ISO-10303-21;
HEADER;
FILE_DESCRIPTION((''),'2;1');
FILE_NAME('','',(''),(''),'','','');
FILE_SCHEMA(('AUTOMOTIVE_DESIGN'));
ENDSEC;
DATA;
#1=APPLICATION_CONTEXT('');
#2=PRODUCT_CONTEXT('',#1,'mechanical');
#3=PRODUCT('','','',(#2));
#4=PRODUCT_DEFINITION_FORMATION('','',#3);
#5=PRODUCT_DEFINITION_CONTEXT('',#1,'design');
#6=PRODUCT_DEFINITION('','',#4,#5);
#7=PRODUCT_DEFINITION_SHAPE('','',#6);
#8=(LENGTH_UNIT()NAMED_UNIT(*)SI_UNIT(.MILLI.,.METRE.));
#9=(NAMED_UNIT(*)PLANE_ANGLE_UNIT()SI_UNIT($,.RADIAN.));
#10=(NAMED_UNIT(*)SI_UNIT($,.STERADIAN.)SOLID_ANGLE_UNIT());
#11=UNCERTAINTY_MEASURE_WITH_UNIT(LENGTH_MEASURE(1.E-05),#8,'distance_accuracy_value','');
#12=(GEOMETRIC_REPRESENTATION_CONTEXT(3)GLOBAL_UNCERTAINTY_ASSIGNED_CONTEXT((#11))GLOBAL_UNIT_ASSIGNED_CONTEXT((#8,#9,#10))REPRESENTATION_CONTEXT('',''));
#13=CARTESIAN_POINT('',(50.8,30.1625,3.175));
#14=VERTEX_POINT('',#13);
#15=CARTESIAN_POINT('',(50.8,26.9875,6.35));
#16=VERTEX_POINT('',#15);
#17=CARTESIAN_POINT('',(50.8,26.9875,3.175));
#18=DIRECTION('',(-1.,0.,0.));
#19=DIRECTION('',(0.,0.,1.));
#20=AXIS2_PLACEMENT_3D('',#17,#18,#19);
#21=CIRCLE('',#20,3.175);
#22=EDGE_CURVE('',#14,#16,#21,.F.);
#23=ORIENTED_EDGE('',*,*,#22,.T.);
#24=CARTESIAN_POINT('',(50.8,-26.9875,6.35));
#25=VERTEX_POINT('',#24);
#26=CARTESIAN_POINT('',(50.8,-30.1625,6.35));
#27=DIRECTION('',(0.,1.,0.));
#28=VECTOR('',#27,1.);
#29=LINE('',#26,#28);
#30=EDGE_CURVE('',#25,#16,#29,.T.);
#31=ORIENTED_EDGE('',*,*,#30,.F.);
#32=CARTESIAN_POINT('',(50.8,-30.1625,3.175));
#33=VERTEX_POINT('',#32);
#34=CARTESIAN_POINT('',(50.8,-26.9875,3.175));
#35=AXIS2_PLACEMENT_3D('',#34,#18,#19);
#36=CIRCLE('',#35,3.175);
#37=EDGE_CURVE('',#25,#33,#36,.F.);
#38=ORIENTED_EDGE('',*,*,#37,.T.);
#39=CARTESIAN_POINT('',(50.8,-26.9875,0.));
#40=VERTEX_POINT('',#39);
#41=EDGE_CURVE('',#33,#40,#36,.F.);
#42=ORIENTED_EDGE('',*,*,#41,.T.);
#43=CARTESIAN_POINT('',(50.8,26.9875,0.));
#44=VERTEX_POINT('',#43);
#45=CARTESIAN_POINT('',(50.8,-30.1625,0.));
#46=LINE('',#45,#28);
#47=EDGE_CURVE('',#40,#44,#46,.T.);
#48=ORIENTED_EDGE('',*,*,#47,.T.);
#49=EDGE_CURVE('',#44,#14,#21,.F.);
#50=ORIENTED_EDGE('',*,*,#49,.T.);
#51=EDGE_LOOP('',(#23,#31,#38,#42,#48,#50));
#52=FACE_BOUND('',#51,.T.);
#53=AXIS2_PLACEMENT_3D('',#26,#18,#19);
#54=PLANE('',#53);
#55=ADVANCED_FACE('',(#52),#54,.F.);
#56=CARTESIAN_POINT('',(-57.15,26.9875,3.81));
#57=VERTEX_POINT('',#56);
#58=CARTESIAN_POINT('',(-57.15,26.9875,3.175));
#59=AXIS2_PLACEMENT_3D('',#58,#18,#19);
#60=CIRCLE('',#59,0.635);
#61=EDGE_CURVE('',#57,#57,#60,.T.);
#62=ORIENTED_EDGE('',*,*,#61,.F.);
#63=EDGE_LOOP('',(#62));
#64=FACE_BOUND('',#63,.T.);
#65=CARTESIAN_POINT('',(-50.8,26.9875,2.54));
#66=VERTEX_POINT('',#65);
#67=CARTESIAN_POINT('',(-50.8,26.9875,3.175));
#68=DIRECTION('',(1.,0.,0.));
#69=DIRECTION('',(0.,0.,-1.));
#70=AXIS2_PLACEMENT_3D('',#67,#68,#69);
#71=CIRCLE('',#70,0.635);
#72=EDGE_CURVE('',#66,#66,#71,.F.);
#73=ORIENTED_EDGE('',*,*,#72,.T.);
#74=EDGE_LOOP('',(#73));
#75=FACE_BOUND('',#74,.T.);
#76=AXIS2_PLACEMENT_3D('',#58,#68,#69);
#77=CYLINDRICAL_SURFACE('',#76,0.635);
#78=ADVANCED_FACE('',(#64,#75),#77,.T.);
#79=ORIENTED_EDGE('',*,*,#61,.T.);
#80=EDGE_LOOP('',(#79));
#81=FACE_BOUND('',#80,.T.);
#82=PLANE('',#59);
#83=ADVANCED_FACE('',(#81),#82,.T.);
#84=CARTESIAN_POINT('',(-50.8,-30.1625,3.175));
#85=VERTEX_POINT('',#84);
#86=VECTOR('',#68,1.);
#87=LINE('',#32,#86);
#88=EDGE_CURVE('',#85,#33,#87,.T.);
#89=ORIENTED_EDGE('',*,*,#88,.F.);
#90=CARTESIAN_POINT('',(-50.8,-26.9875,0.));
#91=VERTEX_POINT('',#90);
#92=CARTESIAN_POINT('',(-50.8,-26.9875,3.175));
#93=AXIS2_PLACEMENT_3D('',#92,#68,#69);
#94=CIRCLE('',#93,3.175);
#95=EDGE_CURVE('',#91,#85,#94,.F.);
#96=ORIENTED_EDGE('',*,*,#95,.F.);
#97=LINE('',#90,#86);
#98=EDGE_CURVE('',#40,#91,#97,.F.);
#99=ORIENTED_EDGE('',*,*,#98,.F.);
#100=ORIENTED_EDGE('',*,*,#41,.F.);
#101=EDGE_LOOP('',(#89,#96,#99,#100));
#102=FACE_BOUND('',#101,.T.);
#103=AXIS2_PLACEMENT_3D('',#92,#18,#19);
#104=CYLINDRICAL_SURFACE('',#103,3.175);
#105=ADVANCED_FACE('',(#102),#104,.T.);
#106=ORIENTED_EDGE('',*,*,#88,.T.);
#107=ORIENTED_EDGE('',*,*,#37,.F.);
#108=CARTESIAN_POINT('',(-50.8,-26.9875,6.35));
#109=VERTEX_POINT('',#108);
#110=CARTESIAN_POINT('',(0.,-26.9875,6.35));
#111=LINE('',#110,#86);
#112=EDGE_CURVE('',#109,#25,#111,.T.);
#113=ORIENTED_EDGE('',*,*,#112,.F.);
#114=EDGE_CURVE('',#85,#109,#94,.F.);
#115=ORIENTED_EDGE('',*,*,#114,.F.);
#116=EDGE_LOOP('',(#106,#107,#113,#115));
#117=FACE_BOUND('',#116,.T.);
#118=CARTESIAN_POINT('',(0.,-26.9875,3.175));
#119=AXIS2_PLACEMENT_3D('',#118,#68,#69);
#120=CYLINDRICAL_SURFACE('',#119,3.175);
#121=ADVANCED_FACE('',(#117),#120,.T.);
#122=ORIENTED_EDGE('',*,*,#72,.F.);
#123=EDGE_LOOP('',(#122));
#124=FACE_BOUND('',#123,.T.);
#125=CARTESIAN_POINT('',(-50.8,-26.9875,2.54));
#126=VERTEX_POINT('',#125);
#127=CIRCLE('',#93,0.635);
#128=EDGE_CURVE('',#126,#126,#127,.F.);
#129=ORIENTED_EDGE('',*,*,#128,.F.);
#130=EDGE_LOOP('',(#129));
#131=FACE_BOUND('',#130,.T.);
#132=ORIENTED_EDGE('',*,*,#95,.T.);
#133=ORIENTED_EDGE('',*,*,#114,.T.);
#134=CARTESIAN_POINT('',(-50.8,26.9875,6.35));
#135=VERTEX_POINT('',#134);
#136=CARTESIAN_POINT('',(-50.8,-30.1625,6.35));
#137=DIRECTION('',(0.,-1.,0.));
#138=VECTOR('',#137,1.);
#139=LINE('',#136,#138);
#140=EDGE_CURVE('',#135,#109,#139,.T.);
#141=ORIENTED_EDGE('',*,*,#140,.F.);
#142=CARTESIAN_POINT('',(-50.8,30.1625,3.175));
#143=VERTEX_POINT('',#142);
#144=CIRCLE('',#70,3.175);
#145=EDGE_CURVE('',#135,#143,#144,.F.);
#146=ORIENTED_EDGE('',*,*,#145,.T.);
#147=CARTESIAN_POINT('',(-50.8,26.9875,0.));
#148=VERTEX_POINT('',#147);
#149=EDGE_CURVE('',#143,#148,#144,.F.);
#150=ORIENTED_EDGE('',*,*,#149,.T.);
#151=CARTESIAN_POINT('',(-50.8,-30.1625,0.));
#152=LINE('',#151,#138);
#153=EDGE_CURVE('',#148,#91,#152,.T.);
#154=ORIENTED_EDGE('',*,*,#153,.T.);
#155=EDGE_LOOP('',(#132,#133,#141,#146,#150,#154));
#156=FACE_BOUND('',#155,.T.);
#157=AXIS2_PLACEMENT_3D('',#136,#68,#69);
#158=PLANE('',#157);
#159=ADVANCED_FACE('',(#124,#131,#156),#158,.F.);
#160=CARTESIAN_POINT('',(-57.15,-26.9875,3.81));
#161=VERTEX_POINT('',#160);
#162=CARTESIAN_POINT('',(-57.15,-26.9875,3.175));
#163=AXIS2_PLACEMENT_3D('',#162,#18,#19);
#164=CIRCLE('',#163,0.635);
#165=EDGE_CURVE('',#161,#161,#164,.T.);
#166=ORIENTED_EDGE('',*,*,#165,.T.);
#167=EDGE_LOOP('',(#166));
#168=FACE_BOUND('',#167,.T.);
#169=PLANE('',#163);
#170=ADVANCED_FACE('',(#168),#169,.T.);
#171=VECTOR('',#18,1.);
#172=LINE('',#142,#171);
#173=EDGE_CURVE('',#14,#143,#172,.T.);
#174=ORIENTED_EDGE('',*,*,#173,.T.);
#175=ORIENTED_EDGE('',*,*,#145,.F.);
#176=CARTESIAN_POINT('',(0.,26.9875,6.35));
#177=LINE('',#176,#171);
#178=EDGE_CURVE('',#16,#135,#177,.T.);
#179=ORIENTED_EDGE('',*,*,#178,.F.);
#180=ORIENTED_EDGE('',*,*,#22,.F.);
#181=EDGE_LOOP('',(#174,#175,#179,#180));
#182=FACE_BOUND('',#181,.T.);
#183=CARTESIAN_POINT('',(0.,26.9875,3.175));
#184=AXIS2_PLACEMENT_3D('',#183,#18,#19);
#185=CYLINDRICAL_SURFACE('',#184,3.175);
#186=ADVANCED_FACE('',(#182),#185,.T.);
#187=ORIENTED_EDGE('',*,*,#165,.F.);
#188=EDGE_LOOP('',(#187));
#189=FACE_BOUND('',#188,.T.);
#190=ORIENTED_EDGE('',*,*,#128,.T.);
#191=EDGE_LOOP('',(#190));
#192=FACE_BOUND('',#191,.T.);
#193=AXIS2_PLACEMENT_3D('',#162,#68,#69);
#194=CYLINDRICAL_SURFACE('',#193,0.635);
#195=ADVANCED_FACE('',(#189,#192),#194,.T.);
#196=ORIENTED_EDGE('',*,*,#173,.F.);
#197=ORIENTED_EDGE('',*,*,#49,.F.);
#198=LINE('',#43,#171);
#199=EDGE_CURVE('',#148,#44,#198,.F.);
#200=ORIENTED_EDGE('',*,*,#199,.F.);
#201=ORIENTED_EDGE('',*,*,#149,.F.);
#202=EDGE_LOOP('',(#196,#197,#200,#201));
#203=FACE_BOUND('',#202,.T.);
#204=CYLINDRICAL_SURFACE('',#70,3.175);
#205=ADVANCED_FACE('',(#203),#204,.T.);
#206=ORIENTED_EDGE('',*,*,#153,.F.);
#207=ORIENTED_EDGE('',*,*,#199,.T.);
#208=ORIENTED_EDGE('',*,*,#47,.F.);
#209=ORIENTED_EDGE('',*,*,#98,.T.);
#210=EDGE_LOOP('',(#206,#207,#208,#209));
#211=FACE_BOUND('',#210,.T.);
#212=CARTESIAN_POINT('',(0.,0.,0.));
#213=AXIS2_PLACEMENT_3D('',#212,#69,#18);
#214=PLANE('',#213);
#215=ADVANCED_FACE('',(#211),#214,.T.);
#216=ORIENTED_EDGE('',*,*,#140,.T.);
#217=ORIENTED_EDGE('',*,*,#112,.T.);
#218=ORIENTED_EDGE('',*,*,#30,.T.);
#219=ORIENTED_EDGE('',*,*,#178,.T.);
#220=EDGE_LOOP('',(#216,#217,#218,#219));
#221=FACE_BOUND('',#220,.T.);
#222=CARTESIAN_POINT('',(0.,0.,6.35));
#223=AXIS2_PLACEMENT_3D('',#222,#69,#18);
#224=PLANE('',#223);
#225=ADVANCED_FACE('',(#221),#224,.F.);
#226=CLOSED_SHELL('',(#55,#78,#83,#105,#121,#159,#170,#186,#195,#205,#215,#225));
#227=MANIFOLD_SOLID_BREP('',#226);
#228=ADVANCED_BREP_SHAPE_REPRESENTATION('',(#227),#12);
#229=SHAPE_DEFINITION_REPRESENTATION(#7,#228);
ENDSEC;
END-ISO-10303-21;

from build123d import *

# Parameters (mm, degrees)
SKETCH1_W           = 101.6
SKETCH1_H           = 60.325
BOSS_EXTRUDE1_DEPTH = 6.35
FILLET1_R           = 3.175
SKETCH2_R           = 0.635
BOSS_EXTRUDE2_DEPTH = 6.35


with BuildPart() as part:
    # Sketch1 → Boss-Extrude1 (new body)
    with BuildSketch(Plane.XY):
        Rectangle(SKETCH1_W, SKETCH1_H)
    extrude(amount=BOSS_EXTRUDE1_DEPTH)

    # Fillet1
    fillet1_edges = [part.edges().sort_by_distance(p)[0] for p in [
        (0, 30.1625, 6.35),
        (0, 30.1625, 0),
        (0, -30.1625, 6.35),
        (0, -30.1625, 0),
    ]]
    fillet(fillet1_edges, radius=FILLET1_R - 0.0001)  # a hair under: the kernel refuses the full size

    # Sketch2 → Boss-Extrude2 (add)
    with BuildSketch(Plane.ZY.offset(50.8)):
        with Locations(Location((3.175, 26.9875, 0), (0, 0, 180))):
            Circle(SKETCH2_R)
        with Locations(Location((3.175, -26.9875, 0), (0, 0, 180))):
            Circle(SKETCH2_R)
    extrude(amount=BOSS_EXTRUDE2_DEPTH)


solid = part.part
